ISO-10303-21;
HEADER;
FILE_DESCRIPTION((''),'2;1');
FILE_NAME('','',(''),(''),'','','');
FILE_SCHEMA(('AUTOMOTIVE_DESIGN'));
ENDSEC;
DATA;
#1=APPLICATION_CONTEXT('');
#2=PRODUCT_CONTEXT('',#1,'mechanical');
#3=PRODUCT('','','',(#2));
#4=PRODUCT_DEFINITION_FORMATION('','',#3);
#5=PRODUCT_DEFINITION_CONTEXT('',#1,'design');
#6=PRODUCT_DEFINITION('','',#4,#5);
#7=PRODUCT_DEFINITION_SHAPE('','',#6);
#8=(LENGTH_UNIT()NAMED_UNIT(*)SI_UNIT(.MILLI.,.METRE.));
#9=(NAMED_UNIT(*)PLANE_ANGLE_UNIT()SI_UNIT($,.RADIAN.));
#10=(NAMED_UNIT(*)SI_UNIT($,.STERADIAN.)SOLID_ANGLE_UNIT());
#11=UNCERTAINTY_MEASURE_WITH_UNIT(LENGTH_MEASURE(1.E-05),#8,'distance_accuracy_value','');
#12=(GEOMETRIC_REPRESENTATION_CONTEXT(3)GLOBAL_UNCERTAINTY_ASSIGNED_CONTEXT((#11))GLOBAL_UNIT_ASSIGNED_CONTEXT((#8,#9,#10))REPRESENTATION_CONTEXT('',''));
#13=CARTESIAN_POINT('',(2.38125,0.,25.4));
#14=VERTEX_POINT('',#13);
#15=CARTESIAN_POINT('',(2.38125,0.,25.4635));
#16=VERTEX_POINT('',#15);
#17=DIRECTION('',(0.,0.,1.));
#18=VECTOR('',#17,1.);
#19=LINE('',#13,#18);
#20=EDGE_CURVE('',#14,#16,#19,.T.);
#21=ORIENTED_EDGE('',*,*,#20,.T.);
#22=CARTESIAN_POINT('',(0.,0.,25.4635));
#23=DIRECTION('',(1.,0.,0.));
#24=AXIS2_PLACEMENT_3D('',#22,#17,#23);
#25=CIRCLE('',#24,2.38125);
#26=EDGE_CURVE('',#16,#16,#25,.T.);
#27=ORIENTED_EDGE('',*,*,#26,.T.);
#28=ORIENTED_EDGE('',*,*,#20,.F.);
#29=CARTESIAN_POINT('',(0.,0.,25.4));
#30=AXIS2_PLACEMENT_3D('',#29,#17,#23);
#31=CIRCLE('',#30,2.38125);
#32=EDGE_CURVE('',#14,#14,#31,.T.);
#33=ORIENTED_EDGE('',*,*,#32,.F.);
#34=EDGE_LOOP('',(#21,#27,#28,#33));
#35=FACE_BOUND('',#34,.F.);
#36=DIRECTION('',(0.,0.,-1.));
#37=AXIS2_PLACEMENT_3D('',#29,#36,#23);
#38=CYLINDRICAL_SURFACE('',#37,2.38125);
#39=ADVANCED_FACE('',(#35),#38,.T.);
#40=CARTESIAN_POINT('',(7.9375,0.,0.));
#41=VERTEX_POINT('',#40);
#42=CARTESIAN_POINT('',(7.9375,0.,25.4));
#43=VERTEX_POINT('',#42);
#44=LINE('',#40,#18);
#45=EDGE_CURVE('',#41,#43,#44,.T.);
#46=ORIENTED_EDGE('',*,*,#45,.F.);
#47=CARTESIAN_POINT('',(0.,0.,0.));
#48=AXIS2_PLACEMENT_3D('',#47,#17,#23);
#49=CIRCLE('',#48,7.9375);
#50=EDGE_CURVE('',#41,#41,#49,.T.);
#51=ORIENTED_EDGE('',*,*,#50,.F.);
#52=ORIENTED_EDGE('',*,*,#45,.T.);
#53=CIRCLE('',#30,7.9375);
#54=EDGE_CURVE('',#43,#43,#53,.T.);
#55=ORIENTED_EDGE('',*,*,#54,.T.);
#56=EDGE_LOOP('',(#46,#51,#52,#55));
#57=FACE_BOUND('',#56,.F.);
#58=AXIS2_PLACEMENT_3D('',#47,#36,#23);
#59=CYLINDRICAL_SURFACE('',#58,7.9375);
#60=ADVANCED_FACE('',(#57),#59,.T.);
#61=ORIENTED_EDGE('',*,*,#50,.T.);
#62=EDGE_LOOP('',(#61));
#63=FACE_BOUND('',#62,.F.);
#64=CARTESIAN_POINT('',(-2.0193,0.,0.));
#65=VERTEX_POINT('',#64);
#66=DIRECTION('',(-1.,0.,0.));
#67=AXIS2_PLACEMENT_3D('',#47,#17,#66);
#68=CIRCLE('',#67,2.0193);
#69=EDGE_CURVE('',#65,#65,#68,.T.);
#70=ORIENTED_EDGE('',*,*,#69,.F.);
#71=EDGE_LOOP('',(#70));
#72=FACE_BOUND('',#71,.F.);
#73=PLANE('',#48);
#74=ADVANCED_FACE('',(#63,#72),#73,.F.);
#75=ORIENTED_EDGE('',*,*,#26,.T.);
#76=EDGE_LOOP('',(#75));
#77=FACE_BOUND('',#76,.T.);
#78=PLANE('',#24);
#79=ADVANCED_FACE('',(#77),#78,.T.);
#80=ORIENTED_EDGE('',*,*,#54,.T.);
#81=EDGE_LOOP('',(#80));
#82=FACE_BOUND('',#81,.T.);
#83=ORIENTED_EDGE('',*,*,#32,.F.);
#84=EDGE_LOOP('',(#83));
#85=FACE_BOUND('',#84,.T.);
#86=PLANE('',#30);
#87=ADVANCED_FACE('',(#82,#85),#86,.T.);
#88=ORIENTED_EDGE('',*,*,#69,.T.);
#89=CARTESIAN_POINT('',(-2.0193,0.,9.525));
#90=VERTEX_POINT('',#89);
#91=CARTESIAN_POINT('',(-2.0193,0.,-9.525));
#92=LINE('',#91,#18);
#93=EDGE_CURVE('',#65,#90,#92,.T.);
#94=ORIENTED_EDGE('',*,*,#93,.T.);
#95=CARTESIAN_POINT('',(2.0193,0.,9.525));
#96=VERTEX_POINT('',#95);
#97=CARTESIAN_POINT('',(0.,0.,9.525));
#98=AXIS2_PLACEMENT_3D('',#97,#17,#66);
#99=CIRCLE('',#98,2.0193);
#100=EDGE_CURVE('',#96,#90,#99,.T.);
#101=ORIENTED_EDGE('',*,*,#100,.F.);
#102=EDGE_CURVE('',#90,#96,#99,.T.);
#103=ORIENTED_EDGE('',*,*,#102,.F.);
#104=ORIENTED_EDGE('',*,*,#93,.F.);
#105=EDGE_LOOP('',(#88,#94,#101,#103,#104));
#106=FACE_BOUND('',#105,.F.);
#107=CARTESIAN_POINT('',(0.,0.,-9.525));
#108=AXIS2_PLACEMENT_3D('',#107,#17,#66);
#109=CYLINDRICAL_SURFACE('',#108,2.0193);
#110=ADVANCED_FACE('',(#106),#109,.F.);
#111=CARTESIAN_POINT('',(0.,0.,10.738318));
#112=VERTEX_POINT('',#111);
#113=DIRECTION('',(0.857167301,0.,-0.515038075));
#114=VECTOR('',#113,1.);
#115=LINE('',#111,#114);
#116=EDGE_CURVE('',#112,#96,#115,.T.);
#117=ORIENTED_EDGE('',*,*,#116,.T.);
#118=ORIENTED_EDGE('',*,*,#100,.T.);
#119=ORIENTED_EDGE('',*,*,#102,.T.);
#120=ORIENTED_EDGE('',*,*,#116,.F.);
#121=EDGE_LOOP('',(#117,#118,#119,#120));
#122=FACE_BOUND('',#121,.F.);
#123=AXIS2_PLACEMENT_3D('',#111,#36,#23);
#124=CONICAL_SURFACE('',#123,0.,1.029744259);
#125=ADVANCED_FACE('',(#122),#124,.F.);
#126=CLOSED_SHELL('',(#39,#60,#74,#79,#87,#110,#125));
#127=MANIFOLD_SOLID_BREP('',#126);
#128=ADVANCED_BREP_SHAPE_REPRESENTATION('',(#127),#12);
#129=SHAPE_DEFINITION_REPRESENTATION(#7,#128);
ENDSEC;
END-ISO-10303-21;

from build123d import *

# Parameters (mm, degrees)
F0_R     = 7.9375
F1_DEPTH = 25.4
F4_D     = 4.0386
F4_DEPTH = 9.525
F4_TIP   = 1.213317848
F2_R     = 2.38125
F5_DEPTH = 0.0635


# Not quite as in the source:
# - a length typed as a fraction of an inch, garbled in the dataset ("3 / 203.2 mm" for 3/8 in), is restored


with BuildPart() as f1:
    # F0 (on Top) → F1 (new body)
    with BuildSketch(Plane.XY):
        Circle(F0_R)
    extrude(amount=F1_DEPTH)

    # F4
    with Locations(Plane(origin=(0, 0, 0), x_dir=(1, 0, 0), z_dir=(0, 0, -1))):
        with Locations((0, 0)):
            Hole(F4_D / 2, depth=F4_DEPTH)
            with Locations((0, 0, -(F4_DEPTH + F4_TIP / 2))):  # 118° drill point
                Cone(0, F4_D / 2, F4_TIP, mode=Mode.SUBTRACT)

    # F2 (on face) → F5 (join)
    with BuildSketch(Plane.XY.offset(25.4)):
        Circle(F2_R)
    extrude(amount=F5_DEPTH)


solid = f1.part
